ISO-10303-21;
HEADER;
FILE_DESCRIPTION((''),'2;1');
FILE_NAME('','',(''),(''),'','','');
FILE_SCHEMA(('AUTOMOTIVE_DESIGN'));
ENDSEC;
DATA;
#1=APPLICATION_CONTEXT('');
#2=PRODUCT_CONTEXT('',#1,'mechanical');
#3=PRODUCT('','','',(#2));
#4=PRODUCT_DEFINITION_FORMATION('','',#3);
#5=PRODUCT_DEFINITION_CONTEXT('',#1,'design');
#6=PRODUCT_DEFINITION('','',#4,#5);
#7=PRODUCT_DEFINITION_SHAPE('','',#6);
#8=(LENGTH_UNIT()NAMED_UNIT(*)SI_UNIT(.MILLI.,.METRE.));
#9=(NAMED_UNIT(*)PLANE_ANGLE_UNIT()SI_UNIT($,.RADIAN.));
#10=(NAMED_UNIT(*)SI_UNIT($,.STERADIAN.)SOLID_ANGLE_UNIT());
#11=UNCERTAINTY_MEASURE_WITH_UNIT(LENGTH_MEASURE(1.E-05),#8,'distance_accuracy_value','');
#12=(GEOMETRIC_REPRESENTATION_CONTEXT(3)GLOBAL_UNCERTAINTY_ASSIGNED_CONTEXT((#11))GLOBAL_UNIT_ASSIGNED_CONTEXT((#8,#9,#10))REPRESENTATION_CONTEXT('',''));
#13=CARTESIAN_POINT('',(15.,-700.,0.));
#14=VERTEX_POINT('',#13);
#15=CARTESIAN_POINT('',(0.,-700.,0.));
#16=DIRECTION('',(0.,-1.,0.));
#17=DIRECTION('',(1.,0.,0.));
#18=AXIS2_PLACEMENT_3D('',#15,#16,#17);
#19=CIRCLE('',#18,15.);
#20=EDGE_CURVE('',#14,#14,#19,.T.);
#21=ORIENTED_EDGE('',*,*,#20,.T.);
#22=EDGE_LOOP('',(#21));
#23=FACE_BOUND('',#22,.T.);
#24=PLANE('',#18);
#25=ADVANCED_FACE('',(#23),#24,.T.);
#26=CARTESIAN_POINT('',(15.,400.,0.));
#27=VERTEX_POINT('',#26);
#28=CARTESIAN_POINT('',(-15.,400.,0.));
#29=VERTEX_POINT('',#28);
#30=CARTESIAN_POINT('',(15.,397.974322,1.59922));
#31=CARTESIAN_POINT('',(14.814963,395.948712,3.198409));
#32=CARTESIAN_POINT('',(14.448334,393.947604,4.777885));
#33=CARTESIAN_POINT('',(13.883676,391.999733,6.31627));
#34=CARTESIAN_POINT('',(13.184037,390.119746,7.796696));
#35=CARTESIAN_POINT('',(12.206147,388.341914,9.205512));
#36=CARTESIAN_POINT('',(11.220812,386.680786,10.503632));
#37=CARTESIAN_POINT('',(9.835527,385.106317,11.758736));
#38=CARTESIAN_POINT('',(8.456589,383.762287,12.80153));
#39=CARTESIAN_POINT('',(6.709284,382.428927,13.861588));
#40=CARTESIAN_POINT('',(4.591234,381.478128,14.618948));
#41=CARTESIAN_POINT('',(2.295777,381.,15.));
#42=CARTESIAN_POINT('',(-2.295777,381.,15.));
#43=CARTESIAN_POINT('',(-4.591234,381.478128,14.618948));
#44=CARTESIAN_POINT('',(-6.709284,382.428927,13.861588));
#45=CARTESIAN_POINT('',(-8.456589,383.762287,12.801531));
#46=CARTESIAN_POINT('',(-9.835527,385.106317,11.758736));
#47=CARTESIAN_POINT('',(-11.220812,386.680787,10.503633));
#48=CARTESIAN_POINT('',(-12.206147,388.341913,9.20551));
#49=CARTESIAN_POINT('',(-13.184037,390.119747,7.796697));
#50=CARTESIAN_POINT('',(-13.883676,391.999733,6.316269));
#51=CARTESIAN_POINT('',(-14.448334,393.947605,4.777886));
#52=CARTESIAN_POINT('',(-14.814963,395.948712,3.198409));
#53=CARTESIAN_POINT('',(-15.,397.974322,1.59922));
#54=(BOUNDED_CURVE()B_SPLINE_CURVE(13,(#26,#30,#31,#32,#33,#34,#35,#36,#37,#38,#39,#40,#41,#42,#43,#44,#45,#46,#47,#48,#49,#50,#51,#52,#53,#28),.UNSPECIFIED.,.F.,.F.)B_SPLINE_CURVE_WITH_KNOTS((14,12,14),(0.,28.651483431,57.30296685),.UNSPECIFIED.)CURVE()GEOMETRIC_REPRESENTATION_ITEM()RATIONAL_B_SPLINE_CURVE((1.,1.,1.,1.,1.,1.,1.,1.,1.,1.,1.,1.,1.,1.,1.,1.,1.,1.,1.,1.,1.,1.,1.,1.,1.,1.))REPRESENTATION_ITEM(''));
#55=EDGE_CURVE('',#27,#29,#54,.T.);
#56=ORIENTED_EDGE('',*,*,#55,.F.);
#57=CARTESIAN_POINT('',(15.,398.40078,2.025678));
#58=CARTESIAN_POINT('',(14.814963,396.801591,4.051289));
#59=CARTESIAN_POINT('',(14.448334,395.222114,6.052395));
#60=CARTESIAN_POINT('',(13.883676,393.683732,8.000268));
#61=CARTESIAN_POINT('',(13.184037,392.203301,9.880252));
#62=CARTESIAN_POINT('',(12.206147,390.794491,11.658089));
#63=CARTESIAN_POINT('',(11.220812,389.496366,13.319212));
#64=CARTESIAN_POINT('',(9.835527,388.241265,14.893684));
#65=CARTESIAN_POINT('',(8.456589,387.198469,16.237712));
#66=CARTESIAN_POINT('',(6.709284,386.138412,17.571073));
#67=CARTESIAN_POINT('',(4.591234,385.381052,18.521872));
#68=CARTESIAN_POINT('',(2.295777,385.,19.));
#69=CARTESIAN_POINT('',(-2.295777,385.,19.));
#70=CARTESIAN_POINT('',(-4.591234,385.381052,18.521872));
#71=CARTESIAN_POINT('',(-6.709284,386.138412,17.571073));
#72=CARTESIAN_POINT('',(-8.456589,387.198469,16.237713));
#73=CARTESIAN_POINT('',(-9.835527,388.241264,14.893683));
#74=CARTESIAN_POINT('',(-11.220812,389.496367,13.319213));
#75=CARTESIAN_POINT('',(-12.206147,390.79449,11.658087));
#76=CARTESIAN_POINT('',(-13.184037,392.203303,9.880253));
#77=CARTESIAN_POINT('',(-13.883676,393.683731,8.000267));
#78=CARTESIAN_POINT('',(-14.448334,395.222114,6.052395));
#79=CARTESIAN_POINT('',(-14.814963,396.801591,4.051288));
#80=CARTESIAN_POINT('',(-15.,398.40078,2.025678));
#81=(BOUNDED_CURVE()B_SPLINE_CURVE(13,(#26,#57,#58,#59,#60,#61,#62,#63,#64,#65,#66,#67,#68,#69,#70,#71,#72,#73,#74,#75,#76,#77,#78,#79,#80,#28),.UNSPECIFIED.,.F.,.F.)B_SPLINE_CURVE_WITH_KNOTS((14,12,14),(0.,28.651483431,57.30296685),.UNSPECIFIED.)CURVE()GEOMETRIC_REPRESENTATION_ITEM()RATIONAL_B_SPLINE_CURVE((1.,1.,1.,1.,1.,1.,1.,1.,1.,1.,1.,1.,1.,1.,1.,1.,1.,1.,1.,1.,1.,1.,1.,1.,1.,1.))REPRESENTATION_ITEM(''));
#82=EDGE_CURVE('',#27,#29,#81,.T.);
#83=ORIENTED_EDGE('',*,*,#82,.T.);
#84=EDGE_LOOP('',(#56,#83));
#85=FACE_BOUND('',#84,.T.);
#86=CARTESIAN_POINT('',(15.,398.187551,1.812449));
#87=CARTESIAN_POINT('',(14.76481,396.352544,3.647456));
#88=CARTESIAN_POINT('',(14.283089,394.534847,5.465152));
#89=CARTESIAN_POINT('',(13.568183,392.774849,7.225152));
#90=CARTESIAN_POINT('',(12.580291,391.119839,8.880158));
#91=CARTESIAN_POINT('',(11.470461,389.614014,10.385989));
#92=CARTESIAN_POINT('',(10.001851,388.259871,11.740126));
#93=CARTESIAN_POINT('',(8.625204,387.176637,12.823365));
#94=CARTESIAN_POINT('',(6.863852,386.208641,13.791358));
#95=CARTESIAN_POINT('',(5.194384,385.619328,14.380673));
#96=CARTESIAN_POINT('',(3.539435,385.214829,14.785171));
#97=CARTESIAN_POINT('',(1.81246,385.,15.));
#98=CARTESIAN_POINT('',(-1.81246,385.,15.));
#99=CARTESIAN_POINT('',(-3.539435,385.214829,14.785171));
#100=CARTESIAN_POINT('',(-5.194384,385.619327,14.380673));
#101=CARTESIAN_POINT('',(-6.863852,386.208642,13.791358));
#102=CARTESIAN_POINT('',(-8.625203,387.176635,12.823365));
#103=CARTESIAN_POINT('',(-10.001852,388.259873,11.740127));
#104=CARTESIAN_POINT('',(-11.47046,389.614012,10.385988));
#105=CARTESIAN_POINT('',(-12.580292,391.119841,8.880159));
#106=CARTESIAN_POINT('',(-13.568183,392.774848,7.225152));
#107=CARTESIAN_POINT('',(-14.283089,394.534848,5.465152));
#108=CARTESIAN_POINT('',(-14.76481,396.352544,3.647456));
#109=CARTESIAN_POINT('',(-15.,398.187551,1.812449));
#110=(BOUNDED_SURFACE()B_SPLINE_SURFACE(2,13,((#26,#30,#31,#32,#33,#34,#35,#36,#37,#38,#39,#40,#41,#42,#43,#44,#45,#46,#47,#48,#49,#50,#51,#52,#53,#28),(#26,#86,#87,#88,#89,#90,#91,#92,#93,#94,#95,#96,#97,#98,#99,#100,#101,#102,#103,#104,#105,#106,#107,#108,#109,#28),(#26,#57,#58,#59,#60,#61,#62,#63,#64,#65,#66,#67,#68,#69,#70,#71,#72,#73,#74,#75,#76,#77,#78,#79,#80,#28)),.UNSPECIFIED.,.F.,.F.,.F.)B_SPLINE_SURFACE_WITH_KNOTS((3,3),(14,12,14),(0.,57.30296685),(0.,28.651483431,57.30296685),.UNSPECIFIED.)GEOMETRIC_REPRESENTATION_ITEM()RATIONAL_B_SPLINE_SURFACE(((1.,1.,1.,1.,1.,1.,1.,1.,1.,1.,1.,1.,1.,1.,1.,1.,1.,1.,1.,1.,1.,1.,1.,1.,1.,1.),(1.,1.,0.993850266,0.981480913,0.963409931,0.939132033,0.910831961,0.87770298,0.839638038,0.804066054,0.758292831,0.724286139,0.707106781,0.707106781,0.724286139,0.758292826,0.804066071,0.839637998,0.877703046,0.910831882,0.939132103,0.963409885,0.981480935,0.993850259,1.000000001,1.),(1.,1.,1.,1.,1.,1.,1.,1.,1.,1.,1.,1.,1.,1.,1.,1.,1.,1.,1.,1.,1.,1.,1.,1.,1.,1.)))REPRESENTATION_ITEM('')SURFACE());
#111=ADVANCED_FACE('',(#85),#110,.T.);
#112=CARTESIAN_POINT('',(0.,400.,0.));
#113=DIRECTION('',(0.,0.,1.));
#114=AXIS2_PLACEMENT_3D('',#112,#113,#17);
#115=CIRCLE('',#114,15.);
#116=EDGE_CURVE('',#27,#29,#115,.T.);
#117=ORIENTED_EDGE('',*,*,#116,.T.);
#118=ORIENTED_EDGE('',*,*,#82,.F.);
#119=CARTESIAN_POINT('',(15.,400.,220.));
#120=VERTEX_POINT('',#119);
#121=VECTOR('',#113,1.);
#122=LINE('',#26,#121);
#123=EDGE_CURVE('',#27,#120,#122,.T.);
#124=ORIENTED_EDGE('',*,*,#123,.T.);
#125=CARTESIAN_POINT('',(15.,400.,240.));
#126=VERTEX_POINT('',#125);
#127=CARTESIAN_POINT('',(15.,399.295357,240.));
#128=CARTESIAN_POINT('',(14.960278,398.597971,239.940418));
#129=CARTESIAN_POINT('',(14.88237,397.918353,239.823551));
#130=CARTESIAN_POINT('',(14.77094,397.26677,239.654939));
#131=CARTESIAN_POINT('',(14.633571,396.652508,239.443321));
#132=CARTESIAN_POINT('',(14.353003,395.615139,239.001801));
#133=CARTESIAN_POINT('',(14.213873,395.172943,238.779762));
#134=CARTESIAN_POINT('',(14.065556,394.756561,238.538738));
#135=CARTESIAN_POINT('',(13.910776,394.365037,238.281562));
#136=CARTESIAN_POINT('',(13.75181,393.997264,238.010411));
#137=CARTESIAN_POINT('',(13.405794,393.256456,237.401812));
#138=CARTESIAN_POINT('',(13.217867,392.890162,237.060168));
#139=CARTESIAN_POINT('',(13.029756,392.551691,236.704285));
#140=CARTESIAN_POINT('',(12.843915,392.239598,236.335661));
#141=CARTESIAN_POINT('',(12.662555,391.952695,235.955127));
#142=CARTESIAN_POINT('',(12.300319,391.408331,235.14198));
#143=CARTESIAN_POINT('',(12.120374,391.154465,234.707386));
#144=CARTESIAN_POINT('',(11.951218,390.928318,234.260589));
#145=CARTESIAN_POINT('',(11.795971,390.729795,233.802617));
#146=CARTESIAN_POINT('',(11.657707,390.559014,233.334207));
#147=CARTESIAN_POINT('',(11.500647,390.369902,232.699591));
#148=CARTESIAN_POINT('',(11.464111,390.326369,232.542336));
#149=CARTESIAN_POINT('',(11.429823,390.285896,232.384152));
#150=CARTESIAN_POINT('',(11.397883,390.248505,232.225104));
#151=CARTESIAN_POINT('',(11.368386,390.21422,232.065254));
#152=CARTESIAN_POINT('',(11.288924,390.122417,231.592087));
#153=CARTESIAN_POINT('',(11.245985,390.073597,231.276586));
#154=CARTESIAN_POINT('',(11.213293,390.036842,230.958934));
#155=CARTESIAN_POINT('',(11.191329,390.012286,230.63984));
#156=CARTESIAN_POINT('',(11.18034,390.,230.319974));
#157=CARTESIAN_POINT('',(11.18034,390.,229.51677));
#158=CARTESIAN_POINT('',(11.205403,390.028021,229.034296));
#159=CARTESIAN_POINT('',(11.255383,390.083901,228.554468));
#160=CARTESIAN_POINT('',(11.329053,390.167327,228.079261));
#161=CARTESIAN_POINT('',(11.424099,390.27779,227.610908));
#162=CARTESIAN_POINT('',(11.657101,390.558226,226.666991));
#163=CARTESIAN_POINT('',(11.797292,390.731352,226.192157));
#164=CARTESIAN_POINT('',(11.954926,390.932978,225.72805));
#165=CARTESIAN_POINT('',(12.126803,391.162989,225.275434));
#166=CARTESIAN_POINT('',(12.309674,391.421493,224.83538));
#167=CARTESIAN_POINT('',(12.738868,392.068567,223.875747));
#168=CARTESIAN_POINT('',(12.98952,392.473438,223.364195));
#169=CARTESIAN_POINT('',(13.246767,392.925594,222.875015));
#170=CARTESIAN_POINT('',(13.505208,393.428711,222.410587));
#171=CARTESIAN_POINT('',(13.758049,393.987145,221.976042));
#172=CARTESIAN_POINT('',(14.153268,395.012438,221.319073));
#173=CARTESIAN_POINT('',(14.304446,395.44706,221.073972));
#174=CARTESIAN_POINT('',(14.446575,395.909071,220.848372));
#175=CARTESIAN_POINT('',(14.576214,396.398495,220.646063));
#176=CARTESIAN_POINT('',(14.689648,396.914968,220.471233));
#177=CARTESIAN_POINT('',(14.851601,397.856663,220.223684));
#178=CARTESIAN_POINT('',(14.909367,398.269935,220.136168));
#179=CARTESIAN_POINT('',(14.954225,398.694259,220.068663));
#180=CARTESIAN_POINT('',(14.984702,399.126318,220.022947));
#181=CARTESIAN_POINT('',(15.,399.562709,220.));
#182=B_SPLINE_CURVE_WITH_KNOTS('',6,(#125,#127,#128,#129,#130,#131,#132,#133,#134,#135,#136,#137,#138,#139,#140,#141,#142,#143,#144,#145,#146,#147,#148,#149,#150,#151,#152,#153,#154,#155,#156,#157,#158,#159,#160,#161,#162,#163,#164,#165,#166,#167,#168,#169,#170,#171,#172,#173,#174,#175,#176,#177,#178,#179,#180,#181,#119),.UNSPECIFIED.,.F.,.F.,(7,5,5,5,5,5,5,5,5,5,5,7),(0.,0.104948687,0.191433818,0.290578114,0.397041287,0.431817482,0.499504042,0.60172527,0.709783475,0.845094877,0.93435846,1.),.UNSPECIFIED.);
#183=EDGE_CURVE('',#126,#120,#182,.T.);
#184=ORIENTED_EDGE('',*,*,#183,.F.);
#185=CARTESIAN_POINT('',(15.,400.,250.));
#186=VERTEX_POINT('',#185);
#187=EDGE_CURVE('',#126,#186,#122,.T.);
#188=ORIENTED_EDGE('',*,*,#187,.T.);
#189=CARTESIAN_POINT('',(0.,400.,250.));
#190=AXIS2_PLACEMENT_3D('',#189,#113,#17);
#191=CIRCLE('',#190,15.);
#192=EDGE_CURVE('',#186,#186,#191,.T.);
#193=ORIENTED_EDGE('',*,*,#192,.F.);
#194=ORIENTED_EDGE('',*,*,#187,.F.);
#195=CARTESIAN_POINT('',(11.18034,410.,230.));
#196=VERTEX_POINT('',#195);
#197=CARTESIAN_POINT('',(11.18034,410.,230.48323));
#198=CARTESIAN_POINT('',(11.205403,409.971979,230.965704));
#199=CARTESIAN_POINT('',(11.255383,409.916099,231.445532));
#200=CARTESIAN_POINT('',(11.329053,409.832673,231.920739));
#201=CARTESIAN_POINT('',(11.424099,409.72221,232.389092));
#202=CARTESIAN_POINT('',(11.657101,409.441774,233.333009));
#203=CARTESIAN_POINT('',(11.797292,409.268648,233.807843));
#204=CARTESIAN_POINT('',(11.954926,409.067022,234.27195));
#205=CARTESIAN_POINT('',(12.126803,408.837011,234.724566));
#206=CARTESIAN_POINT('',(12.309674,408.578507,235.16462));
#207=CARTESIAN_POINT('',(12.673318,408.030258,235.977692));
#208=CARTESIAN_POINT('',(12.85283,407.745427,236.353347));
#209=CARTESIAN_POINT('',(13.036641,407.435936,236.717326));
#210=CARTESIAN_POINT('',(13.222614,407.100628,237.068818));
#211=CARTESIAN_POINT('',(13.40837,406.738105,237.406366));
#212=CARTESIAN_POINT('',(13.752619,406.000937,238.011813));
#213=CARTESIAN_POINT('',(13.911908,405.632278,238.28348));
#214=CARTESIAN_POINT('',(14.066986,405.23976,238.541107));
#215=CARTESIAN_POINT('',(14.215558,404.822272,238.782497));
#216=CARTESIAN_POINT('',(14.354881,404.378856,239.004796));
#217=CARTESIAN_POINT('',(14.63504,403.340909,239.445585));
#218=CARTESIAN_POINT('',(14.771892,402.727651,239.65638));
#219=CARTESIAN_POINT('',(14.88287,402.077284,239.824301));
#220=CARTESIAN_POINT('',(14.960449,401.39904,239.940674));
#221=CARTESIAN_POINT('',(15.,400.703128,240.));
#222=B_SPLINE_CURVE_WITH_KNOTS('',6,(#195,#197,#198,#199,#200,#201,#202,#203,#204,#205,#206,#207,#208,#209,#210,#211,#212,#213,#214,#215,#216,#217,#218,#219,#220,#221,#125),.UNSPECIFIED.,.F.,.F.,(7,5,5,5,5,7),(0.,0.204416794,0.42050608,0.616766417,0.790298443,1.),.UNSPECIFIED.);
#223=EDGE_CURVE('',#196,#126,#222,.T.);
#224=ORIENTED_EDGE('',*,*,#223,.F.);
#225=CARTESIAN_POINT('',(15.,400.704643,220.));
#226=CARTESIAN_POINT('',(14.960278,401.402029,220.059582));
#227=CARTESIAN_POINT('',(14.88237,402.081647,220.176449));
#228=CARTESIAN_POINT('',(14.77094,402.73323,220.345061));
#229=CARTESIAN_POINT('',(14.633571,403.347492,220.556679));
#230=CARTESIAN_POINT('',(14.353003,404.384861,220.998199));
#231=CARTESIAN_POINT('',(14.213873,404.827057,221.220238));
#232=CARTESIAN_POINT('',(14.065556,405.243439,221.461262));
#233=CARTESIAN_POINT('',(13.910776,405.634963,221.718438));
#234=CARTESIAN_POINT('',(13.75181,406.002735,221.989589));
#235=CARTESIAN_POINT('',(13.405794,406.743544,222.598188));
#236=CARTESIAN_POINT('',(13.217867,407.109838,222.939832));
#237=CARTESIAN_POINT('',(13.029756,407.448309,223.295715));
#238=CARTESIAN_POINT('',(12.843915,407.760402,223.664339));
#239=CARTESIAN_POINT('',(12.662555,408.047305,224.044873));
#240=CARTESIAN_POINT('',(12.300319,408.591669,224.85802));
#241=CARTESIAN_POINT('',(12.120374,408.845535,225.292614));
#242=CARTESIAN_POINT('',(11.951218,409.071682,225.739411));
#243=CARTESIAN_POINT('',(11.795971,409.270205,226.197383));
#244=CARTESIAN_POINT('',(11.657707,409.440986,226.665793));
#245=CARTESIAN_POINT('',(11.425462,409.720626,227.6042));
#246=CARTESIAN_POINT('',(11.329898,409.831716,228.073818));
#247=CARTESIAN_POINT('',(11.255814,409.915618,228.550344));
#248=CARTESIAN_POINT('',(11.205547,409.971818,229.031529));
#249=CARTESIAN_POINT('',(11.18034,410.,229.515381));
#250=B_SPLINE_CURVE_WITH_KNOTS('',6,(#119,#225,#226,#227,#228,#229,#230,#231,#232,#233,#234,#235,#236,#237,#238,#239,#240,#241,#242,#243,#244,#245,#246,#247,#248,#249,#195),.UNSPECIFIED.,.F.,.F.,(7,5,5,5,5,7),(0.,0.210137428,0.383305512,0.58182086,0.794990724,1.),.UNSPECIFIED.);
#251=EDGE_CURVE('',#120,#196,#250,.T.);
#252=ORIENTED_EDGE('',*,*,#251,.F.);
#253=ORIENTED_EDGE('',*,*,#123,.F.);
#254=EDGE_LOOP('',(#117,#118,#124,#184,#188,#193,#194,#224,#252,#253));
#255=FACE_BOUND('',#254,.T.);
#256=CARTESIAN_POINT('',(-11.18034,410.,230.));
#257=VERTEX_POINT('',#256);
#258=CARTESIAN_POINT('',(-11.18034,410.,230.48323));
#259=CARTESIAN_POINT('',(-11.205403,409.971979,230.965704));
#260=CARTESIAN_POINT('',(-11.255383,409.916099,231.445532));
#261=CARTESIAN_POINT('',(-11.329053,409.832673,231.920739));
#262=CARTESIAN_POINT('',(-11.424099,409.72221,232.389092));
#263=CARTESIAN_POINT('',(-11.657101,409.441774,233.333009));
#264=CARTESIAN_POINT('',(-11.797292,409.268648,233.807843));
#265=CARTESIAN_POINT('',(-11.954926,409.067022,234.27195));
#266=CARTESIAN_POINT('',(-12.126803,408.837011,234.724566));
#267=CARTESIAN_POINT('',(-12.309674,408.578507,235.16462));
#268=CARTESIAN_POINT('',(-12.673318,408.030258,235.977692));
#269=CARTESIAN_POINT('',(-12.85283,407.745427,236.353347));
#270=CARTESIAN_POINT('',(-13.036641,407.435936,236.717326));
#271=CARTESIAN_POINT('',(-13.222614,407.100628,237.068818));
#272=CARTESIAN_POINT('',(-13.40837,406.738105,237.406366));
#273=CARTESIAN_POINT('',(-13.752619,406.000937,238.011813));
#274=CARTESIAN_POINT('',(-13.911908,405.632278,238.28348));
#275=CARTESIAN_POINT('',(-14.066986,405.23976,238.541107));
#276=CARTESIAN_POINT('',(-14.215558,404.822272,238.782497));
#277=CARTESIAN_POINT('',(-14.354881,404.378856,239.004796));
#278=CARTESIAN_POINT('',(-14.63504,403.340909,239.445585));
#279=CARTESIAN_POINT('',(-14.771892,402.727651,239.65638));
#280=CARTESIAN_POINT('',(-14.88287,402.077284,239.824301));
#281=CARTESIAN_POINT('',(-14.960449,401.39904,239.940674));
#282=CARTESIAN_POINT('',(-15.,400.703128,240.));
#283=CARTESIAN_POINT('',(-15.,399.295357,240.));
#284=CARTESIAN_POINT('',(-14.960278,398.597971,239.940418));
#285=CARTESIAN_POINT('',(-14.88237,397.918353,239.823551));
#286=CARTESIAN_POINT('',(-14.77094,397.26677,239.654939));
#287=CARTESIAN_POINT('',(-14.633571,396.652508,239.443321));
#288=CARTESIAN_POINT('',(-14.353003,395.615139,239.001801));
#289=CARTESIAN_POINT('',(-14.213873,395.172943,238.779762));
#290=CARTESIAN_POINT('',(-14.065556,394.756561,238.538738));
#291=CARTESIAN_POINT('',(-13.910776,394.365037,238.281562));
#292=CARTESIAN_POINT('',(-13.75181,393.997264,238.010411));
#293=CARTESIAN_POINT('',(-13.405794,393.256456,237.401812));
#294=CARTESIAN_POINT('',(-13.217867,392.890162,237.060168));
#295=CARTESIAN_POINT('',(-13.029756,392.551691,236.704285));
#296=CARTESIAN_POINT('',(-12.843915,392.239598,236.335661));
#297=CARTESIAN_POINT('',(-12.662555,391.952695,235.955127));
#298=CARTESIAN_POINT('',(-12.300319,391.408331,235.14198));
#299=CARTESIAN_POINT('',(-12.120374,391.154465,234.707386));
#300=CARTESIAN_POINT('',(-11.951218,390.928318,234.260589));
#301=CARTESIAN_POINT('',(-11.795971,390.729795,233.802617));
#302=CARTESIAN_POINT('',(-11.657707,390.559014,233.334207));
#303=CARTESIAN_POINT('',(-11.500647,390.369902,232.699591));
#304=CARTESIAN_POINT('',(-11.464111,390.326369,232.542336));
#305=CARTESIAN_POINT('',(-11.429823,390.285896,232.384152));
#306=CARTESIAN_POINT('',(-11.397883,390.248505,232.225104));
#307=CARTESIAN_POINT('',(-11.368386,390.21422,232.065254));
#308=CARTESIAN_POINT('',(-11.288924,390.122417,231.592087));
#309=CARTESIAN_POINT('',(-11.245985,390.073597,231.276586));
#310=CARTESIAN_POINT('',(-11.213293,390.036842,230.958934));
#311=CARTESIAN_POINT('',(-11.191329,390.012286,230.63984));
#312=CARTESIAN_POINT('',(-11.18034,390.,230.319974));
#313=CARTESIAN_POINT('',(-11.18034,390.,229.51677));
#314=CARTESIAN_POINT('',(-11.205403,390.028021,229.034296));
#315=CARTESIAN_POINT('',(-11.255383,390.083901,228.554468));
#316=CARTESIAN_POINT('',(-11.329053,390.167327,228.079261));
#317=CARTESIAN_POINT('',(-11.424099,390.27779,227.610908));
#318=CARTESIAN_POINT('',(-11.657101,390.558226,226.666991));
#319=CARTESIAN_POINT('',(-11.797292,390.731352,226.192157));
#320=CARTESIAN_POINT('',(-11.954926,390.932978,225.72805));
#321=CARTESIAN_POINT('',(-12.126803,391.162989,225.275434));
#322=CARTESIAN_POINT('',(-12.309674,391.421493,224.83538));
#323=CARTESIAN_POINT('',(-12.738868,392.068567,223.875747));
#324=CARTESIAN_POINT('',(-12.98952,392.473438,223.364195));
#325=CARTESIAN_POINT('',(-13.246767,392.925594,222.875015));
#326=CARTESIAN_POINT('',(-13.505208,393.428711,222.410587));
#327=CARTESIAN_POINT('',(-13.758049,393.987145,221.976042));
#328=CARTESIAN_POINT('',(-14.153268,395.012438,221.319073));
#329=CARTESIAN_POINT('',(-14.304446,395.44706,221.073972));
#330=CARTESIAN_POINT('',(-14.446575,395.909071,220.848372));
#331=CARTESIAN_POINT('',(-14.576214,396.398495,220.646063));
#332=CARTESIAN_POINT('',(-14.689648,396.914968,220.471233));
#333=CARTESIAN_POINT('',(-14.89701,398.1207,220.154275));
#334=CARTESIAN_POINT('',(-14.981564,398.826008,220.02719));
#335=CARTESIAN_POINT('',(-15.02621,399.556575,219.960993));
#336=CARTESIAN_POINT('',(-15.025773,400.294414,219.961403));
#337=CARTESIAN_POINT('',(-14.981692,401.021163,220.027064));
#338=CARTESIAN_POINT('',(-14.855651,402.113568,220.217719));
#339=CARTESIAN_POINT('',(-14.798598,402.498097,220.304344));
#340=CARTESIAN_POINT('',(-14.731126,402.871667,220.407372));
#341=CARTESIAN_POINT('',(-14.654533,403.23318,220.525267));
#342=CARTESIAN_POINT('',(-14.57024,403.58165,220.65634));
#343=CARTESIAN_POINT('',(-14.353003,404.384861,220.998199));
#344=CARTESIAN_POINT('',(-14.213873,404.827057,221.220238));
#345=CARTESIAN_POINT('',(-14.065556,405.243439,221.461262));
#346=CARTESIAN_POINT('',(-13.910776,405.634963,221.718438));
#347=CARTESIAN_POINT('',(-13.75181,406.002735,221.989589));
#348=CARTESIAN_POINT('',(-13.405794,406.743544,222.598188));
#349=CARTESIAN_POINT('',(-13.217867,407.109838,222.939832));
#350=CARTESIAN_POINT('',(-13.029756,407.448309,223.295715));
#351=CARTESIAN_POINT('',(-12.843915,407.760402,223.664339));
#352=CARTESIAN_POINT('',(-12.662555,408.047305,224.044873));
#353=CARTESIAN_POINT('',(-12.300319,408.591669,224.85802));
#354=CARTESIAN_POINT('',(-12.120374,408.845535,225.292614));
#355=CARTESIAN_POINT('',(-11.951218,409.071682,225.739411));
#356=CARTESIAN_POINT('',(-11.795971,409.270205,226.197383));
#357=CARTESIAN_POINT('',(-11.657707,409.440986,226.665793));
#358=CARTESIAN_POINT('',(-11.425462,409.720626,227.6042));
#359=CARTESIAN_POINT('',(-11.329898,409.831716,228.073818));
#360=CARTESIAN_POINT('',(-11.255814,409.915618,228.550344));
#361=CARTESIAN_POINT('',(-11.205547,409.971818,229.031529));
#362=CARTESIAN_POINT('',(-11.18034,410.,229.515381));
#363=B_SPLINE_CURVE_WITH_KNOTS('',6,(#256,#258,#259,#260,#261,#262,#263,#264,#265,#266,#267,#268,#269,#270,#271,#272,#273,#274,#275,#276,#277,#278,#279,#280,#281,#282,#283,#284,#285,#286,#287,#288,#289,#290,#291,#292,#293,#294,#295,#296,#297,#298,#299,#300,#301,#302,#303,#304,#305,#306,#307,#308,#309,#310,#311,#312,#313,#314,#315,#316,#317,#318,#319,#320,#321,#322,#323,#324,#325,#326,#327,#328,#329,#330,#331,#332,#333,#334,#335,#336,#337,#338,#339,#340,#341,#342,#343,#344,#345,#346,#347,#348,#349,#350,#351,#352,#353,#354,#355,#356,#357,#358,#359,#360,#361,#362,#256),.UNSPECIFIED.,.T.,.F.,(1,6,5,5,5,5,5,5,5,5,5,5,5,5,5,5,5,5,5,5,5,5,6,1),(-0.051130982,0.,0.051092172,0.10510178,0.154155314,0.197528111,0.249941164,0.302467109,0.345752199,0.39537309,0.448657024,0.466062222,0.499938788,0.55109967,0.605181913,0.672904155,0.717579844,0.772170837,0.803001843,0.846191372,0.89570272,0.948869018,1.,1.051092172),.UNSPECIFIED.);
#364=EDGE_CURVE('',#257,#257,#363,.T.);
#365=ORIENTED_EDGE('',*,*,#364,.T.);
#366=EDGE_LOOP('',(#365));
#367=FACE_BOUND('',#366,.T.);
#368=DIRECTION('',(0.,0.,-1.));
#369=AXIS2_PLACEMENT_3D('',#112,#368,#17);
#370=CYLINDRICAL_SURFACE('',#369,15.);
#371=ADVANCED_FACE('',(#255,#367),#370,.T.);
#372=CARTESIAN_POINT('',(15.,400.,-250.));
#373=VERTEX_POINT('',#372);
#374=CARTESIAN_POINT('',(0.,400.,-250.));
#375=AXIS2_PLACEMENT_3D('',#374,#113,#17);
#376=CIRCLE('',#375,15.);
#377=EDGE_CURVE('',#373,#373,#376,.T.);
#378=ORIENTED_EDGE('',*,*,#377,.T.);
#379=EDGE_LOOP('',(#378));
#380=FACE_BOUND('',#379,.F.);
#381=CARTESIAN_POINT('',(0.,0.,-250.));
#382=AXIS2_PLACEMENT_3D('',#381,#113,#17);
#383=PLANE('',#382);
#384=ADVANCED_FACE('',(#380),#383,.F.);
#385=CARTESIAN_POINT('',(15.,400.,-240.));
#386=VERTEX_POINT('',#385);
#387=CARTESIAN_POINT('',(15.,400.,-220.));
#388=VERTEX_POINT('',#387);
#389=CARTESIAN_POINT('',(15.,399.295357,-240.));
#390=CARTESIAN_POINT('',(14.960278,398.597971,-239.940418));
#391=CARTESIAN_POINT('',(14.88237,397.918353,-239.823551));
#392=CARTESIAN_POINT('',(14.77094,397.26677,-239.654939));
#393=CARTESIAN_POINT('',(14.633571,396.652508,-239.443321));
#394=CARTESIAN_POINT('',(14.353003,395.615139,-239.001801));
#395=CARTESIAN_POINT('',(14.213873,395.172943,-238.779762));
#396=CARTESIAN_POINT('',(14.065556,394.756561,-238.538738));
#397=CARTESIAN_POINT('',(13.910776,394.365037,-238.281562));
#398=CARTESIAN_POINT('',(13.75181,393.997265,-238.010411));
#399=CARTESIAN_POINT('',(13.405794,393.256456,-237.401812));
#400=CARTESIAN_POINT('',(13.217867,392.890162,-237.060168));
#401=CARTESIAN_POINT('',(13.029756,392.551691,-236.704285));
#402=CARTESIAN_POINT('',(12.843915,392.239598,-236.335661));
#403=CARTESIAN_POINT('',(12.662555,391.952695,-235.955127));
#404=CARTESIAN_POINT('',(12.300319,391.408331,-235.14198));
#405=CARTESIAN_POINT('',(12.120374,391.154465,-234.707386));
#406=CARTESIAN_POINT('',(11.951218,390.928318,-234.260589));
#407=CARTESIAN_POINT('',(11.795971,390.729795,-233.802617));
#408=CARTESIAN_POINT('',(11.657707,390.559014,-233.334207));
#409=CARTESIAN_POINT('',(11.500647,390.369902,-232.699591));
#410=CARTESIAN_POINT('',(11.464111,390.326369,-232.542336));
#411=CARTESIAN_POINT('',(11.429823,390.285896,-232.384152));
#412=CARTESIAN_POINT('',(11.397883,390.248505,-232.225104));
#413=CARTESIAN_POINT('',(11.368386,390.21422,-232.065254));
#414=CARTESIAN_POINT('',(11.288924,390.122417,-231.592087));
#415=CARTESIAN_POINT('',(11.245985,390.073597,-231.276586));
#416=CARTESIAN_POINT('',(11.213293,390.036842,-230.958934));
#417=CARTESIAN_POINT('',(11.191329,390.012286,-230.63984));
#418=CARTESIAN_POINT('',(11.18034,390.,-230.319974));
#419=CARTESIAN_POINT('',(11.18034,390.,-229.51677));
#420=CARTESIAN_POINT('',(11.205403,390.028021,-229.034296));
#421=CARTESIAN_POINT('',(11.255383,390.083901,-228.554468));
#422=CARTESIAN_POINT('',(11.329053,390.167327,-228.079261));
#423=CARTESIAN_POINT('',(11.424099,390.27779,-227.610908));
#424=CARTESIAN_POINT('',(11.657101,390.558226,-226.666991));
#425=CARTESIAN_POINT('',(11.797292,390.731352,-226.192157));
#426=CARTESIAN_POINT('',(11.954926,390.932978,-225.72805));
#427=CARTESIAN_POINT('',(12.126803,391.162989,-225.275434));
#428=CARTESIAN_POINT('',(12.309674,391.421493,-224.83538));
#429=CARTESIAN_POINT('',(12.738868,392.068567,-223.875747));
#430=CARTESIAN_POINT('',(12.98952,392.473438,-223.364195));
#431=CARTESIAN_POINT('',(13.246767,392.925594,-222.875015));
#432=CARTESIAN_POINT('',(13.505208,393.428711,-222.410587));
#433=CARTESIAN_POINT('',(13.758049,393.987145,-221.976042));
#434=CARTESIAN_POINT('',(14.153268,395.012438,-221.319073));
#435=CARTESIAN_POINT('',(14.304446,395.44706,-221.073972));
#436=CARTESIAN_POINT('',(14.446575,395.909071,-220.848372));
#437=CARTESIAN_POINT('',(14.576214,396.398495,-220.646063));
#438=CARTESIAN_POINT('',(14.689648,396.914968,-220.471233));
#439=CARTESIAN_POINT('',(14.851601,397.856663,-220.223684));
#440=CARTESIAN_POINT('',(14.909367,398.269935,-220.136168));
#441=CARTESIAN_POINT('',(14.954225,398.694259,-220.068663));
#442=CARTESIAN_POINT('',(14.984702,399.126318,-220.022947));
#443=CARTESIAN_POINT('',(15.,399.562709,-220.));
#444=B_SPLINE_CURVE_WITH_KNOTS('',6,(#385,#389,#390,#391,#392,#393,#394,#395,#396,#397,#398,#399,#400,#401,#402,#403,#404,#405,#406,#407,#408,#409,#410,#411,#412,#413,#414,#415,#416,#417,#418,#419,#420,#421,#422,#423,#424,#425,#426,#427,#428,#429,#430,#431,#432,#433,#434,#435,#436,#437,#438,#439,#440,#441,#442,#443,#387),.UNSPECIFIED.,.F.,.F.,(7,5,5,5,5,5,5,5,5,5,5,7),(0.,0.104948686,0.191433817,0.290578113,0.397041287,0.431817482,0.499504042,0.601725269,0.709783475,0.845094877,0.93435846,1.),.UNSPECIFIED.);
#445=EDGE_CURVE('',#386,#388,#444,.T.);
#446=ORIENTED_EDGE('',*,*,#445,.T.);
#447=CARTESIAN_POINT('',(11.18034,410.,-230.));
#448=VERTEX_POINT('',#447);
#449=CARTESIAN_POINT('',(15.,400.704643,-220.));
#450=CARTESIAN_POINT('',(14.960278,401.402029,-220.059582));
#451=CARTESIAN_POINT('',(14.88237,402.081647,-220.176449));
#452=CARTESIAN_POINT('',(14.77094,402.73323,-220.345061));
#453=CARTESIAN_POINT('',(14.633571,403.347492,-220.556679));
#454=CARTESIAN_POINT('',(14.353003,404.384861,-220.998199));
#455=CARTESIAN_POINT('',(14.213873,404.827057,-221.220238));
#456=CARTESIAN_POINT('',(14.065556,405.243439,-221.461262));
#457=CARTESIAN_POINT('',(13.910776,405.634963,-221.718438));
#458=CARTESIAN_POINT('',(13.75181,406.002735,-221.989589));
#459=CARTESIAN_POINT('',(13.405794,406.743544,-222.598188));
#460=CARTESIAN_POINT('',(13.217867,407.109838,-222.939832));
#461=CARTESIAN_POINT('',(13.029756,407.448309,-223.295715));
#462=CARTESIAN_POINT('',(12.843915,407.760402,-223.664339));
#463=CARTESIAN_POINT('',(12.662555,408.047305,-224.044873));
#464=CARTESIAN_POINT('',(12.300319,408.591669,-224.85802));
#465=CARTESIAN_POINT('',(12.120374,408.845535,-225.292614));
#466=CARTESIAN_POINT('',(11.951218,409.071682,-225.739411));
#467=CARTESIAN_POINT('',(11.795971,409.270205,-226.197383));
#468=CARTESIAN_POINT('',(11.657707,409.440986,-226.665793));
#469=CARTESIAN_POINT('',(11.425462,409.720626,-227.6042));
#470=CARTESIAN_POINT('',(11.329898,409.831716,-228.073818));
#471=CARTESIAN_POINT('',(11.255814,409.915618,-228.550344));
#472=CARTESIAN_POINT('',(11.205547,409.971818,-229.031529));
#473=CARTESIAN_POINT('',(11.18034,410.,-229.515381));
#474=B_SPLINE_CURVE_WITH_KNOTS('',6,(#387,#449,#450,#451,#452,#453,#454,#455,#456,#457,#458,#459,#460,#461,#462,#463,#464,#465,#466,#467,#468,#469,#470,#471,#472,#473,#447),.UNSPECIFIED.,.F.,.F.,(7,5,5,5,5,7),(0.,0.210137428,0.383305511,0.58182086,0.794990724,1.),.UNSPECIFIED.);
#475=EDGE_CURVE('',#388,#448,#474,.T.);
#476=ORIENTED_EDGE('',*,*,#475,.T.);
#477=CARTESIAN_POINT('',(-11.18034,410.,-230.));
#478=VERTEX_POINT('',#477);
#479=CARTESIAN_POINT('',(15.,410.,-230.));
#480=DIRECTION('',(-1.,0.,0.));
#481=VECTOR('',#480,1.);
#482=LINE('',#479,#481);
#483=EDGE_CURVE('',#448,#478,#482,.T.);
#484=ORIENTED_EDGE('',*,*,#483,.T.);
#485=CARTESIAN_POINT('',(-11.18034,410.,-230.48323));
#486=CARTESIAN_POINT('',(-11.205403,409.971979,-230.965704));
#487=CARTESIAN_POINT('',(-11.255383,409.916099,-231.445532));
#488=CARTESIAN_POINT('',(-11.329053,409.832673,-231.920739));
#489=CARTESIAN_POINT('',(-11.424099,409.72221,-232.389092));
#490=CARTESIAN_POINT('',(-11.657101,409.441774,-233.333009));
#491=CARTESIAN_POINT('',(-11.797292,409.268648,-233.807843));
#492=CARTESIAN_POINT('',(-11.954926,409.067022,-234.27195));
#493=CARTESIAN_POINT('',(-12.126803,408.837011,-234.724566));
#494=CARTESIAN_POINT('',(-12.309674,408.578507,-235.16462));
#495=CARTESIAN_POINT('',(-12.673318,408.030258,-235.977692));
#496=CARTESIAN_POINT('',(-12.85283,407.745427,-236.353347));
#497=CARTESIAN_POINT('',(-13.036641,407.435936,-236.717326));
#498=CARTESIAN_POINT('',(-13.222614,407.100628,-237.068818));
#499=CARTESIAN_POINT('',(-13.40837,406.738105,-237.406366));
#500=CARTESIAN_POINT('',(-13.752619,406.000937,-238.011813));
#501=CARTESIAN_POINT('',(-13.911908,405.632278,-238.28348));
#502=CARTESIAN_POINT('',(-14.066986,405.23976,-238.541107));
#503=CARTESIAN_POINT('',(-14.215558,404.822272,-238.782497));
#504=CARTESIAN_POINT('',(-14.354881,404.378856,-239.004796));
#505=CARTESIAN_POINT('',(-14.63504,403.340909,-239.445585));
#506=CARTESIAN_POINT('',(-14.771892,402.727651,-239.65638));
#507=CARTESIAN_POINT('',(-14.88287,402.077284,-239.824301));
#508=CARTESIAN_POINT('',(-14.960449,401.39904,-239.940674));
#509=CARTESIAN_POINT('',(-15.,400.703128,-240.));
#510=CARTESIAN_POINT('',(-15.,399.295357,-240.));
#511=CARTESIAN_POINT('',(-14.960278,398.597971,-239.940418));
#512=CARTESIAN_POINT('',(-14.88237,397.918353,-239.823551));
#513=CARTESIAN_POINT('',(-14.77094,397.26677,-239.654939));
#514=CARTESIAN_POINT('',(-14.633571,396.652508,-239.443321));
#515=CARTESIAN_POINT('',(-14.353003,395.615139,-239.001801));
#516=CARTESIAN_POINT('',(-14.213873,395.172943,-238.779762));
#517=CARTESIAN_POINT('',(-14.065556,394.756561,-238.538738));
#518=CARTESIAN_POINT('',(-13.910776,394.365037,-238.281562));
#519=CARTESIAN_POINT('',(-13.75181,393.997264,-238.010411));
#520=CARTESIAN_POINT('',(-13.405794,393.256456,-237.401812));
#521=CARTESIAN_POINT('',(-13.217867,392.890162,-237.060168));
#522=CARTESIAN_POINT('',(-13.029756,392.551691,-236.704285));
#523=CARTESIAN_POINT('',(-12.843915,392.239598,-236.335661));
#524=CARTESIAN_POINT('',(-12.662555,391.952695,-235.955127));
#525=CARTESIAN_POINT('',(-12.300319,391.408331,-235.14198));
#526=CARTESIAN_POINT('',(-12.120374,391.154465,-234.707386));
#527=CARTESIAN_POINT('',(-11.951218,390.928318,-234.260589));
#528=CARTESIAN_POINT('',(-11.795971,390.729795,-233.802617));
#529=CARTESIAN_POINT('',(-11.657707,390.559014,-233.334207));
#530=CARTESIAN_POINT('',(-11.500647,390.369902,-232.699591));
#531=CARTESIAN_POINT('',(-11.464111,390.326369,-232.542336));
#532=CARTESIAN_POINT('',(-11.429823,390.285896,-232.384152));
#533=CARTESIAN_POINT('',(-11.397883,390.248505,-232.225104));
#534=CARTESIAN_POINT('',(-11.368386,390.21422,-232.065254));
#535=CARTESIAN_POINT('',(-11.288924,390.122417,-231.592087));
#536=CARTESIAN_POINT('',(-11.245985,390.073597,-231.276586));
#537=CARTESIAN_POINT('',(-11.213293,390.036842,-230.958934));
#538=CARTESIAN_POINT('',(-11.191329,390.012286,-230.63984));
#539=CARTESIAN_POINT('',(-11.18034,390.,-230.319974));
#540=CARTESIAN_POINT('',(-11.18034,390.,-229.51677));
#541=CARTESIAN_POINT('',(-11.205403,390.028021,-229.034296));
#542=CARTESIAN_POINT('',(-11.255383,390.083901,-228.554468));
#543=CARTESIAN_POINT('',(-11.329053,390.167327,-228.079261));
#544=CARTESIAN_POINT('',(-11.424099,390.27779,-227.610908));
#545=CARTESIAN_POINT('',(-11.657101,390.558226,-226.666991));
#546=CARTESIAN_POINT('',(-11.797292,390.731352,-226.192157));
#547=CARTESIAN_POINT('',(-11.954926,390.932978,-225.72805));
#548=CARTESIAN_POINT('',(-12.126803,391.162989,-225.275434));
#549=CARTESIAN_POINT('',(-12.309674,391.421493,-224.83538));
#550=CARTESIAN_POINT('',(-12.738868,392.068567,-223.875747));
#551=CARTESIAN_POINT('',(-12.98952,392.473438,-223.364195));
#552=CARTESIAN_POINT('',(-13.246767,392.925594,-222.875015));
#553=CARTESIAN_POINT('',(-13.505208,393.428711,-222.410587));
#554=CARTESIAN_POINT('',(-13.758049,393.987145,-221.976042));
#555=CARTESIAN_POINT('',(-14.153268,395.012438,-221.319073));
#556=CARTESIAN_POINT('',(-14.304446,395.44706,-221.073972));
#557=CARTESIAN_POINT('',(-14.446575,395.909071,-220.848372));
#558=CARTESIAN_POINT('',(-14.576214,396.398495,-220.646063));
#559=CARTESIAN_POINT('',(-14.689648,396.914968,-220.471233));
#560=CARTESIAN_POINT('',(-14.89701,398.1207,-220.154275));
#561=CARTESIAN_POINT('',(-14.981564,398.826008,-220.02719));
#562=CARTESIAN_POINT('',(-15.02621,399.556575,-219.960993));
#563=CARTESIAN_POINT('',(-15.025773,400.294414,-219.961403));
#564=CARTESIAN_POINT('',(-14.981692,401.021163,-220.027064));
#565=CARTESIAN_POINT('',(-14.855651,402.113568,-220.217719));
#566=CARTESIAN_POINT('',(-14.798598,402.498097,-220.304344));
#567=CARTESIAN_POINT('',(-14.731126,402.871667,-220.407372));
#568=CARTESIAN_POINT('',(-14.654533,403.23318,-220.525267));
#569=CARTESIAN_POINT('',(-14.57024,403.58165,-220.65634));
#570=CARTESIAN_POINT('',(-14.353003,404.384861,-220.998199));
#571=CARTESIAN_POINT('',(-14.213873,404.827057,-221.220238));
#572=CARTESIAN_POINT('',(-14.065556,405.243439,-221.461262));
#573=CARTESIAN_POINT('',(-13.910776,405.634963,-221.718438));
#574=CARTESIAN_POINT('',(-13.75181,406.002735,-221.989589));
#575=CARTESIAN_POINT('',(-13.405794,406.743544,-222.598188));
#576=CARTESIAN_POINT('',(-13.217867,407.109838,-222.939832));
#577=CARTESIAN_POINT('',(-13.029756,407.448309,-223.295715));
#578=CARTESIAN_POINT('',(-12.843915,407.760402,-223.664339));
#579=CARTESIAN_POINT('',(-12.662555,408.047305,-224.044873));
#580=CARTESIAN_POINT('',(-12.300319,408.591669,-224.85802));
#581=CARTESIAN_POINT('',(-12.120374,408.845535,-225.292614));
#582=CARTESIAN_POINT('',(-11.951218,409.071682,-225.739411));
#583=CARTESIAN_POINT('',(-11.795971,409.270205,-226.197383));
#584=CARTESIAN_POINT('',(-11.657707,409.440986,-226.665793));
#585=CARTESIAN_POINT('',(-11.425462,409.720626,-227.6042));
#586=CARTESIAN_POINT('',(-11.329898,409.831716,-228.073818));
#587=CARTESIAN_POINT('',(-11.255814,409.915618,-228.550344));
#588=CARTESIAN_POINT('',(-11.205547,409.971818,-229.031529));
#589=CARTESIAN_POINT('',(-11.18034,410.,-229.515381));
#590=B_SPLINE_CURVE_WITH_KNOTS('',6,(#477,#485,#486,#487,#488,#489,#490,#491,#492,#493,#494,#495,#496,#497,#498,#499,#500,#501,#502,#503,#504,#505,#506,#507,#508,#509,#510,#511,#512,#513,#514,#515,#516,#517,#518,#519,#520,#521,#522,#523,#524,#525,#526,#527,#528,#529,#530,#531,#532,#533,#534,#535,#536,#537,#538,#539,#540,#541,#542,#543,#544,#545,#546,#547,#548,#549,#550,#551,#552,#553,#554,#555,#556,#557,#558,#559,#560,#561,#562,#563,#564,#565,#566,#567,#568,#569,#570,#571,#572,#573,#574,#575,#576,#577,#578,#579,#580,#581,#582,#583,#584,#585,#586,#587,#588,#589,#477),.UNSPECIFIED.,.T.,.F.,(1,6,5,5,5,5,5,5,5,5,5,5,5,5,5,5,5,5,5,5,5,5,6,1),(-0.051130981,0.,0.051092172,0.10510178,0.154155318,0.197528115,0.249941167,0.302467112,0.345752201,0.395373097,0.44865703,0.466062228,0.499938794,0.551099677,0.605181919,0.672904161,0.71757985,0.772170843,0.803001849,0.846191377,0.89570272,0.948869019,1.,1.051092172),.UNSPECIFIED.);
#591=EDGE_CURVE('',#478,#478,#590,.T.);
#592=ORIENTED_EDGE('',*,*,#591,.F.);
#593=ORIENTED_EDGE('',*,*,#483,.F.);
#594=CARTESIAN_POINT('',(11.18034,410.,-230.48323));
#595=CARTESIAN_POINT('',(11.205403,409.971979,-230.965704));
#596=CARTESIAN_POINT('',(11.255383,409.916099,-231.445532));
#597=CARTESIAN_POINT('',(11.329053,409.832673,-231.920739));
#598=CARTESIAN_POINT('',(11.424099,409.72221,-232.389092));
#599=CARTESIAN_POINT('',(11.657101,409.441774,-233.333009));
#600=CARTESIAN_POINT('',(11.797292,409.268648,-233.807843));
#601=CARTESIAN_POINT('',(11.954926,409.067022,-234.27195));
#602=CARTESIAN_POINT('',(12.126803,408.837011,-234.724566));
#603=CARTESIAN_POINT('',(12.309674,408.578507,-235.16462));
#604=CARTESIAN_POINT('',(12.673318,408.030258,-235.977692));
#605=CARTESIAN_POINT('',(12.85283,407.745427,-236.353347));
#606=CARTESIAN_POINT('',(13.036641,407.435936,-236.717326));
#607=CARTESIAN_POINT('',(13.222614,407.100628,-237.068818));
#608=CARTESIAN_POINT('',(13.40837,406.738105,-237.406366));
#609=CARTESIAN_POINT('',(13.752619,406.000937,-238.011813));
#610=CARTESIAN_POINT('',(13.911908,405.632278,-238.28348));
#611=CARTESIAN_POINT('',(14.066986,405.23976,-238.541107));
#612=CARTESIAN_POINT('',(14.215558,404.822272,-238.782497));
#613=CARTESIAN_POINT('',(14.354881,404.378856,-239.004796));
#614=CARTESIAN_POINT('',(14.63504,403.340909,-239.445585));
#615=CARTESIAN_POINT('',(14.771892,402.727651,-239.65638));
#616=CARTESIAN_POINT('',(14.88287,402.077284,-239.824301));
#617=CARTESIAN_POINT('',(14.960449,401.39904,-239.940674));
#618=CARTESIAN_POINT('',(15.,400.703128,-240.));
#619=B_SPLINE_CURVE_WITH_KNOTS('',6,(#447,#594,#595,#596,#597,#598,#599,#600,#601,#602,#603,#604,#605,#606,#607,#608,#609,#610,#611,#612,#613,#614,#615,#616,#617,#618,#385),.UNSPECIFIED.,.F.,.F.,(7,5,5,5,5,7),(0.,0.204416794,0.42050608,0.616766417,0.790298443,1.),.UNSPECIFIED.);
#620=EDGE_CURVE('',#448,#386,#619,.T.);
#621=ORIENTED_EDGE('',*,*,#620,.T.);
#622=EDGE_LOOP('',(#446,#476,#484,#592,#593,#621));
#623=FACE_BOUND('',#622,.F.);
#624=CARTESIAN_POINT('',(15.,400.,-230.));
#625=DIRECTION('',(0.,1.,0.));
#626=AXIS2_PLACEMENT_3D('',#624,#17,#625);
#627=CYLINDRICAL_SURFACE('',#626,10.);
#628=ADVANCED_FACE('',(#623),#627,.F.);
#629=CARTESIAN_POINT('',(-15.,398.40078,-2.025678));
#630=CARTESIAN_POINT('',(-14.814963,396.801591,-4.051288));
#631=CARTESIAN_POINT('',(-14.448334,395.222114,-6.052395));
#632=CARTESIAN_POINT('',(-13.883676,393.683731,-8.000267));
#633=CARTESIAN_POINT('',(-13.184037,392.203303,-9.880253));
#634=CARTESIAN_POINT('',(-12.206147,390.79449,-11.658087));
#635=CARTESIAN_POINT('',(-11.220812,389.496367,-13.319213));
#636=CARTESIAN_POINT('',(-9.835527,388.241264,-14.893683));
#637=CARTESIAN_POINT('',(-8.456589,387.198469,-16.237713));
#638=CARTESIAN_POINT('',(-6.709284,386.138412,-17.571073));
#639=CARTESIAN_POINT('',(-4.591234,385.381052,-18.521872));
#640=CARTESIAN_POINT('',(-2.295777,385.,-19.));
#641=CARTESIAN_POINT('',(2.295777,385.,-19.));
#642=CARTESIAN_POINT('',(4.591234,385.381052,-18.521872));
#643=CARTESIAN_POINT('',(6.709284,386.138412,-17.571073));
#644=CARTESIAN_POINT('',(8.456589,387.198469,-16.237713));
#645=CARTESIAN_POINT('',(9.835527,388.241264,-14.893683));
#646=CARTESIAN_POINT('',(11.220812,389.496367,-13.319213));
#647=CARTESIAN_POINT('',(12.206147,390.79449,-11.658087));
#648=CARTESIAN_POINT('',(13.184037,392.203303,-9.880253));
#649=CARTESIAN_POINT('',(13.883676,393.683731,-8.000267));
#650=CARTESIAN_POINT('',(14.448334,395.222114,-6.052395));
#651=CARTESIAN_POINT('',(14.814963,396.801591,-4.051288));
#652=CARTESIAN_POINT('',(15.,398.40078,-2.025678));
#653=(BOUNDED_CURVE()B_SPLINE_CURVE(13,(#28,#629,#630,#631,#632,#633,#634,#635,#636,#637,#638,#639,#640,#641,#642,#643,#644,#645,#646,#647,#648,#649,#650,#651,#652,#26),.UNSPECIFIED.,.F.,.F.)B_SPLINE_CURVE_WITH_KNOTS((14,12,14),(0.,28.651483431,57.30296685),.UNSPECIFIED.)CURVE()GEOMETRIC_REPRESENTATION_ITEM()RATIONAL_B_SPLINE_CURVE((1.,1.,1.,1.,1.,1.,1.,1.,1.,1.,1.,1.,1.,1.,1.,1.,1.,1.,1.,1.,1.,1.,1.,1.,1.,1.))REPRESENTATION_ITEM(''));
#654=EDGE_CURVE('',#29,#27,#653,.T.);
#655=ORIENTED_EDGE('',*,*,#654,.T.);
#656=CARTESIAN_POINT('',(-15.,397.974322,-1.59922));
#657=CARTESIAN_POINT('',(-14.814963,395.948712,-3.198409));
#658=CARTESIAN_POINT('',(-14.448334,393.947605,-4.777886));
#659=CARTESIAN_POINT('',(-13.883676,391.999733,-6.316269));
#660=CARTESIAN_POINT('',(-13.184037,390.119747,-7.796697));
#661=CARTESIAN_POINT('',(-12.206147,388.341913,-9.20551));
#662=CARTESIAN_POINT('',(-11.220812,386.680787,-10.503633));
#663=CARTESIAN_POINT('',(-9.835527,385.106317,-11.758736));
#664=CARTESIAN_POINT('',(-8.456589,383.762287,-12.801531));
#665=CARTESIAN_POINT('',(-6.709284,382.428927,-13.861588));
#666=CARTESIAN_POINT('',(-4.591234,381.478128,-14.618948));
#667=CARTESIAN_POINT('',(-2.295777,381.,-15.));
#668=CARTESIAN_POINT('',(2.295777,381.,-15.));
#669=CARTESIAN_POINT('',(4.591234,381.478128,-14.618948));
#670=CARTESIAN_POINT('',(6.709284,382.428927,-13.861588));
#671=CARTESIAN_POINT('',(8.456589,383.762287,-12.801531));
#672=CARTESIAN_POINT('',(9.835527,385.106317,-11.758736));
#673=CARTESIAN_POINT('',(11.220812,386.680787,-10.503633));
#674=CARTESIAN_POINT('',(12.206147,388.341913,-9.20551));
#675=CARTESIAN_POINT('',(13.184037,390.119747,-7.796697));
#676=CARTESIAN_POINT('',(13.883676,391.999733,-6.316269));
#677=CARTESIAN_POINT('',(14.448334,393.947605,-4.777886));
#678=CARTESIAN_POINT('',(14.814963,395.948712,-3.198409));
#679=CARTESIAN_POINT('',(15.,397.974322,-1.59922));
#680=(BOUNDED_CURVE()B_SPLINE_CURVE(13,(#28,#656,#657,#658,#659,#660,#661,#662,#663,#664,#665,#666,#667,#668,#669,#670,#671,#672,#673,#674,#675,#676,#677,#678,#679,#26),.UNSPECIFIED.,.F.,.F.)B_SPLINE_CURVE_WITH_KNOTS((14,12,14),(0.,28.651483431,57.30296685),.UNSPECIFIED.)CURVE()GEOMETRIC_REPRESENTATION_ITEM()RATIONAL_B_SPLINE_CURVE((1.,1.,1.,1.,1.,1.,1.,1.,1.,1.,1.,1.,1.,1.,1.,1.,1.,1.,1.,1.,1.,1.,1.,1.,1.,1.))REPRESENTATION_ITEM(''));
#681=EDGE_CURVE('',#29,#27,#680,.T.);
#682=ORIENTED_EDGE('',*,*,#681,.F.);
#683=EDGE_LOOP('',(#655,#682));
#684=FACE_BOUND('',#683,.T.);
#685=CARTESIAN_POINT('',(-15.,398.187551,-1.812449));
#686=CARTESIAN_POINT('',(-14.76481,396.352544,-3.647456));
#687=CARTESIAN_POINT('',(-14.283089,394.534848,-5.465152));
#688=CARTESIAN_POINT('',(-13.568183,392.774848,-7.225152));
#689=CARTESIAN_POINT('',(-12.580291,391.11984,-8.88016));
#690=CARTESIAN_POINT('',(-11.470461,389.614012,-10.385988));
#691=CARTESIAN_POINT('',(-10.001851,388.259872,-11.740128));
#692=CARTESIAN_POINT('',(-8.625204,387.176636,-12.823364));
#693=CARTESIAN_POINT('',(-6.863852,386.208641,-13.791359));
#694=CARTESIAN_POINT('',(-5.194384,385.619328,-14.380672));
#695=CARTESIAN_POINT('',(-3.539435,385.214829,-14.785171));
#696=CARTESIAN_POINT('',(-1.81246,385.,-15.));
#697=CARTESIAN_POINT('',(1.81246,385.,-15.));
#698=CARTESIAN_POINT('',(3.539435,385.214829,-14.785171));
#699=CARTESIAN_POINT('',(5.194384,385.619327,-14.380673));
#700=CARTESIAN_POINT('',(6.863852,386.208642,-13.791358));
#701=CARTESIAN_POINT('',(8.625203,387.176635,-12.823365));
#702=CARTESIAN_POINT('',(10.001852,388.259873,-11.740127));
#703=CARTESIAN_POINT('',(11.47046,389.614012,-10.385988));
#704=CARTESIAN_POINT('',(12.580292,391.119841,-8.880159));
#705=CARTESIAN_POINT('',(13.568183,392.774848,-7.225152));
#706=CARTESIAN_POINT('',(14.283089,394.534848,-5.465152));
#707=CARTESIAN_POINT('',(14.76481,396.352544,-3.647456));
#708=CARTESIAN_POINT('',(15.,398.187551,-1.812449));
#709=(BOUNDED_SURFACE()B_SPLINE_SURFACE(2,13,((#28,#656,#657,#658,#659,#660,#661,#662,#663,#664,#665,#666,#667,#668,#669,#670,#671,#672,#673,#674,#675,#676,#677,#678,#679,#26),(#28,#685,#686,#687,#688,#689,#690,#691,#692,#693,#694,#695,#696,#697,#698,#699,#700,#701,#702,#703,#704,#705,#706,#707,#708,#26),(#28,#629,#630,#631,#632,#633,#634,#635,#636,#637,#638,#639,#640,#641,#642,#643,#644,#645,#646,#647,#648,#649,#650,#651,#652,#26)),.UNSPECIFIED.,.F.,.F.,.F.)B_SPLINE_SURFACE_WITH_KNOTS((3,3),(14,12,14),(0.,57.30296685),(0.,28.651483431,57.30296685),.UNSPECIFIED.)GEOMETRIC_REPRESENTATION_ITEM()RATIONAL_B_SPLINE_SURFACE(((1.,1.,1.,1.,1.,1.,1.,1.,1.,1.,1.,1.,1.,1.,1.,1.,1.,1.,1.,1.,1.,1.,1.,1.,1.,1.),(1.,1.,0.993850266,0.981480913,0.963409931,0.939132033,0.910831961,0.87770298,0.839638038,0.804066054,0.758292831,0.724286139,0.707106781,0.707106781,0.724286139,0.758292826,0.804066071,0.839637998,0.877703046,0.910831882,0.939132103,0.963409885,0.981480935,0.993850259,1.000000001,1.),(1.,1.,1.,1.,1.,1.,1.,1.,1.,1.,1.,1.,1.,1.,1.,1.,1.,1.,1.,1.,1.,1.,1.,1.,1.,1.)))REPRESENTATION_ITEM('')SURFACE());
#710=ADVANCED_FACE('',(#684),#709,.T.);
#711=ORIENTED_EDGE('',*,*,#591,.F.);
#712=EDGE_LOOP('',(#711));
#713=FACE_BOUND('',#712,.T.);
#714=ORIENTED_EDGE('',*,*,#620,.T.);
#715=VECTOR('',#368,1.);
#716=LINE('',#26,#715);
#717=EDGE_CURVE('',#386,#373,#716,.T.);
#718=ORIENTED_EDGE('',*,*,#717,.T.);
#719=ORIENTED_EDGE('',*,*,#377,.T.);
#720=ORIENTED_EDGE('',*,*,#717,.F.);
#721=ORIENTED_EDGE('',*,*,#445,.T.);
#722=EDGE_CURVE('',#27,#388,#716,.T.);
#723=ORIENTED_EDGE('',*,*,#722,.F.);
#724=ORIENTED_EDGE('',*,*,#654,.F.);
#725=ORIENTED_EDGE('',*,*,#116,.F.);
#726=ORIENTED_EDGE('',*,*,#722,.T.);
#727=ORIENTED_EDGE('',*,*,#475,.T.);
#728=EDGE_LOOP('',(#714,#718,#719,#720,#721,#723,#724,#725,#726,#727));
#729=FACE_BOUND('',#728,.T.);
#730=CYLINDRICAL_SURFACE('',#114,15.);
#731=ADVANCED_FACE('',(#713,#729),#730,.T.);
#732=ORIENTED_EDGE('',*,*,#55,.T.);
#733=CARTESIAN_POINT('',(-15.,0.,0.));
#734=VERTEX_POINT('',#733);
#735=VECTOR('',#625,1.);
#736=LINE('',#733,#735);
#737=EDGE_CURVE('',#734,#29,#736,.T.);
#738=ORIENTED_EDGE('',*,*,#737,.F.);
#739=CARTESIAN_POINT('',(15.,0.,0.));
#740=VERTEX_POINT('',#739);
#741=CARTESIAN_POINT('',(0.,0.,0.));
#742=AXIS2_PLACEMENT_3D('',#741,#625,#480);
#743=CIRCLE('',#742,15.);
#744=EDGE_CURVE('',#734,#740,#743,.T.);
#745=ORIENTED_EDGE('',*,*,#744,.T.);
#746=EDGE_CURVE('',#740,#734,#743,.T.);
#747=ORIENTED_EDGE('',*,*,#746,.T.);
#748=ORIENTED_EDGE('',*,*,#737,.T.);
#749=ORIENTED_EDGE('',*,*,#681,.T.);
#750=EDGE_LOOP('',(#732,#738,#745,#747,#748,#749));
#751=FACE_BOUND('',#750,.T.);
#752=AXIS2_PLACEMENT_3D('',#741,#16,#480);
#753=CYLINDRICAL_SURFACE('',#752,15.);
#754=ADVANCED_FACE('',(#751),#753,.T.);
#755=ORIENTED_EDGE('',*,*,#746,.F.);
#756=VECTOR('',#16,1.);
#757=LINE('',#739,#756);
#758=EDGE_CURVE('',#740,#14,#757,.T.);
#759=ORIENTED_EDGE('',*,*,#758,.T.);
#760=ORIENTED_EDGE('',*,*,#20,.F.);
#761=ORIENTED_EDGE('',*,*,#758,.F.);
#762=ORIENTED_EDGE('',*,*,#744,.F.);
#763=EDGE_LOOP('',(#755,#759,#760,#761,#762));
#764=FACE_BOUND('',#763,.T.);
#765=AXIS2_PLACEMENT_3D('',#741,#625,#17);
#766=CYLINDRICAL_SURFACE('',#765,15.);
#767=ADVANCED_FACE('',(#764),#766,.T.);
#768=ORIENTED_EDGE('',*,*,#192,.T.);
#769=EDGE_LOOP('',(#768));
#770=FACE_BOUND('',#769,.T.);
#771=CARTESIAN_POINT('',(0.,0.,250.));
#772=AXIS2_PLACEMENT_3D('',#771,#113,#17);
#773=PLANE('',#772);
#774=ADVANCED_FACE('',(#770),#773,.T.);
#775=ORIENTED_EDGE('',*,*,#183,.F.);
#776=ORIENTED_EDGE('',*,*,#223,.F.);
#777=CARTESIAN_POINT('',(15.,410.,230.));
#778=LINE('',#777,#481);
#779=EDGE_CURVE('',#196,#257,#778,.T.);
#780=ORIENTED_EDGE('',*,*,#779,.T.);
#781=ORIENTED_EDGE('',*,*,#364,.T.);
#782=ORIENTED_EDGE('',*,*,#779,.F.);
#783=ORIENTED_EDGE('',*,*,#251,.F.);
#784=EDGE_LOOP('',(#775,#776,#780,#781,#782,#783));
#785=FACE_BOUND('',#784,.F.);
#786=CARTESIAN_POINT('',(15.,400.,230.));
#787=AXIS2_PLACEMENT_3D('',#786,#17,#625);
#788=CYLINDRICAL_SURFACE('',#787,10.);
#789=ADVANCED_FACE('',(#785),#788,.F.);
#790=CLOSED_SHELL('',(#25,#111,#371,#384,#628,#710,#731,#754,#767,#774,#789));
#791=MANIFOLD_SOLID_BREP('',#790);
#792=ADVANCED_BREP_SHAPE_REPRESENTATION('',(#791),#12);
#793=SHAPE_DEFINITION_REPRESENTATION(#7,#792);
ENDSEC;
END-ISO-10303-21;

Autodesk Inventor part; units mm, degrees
ref_plane "XZ Plane" through (0, 0, 0) normal (0, 1, 0) x (-1, 0, 0)
ref_plane "XY Plane" through (0, 0, 0) normal (0, 0, 1) x (1, 0, 0)
sketch "Szkic1" plane through (0, 0, 0) normal (0, 1, 0) x (-1, 0, 0)
  circle A0 centre (0, 0) radius 15
  dimension "d0" = 30
extrude "Wyciągnięcie proste1" add sketch "Szkic1" along normal blind 400
sketch "Szkic2" plane through (0, 0, 0) normal (0, 0, 1) x (1, 0, 0)
  point P0 (0, 0)
sketch "Szkic3" plane through (0, 0, 0) normal (0, 0, 1) x (1, 0, 0)
  circle A0 centre (0, 400) radius 15
  point P0 (0, 0)
  dimension "d3" = 30
extrude "Wyciągnięcie proste2" add sketch "Szkic3" along normal mid plane 500
fillet "Zaokrąglenie1" radius 4 4 edges at (-10.6066, 389.3934, -10.6066) (10.6066, 389.3934, -10.6066) (10.6066, 389.3934, 10.6066) (-10.6066, 389.3934, 10.6066)
ref_plane "Płaszczyzna konstrukcyjna1" through (15, 0, 0) normal (1, 0, 0) x (0, 1, 0)
sketch "Szkic4" plane through (15, 0, 0) normal (1, 0, 0) x (0, 1, 0)
  line L0 (400, 0) -> (400, 0) projected
  line L1 (400, 0) -> (400, 0) projected
  line L2 (415, 250) -> (385, 250) projected
  line L3 (385, -250) -> (415, -250) projected
  line L4 (400, 0) -> (400, 0) projected
  line L5 (400, 0) -> (400, 0) projected
  line L6 (0, 15) -> (0, -15) projected
  line L7 (0, 15) -> (381, 15) projected
  line L8 (0, -15) -> (381, -15) projected
  line L9 (385, -250) -> (385, 250) projected
  line L10 (415, -250) -> (415, 250) projected
  circle A0 centre (400, 230) radius 10
  point P0 (0, 0)
  dimension "d8" = 20
  dimension "d9" = 20
extrude "Wyciągnięcie proste3" cut sketch "Szkic4" against normal through all contours A0
mirror "Odbicie lustrzane1" about plane through (0, 0, 0) normal (0, 0, 1) of "Wyciągnięcie proste3"
sketch "Szkic5" plane through (0, 0, 0) normal (0, -1, 0) x (1, 0, 0)
  circle A0 centre (0, 0) radius 15 projected
extrude "Wyciągnięcie proste4" add sketch "Szkic5" along normal blind 700
sketch "Szkic6" plane through (15, 0, 0) normal (1, 0, 0) x (0, 1, 0)
  point P0 (0, 0)
properties part number "1" material "Złote"
